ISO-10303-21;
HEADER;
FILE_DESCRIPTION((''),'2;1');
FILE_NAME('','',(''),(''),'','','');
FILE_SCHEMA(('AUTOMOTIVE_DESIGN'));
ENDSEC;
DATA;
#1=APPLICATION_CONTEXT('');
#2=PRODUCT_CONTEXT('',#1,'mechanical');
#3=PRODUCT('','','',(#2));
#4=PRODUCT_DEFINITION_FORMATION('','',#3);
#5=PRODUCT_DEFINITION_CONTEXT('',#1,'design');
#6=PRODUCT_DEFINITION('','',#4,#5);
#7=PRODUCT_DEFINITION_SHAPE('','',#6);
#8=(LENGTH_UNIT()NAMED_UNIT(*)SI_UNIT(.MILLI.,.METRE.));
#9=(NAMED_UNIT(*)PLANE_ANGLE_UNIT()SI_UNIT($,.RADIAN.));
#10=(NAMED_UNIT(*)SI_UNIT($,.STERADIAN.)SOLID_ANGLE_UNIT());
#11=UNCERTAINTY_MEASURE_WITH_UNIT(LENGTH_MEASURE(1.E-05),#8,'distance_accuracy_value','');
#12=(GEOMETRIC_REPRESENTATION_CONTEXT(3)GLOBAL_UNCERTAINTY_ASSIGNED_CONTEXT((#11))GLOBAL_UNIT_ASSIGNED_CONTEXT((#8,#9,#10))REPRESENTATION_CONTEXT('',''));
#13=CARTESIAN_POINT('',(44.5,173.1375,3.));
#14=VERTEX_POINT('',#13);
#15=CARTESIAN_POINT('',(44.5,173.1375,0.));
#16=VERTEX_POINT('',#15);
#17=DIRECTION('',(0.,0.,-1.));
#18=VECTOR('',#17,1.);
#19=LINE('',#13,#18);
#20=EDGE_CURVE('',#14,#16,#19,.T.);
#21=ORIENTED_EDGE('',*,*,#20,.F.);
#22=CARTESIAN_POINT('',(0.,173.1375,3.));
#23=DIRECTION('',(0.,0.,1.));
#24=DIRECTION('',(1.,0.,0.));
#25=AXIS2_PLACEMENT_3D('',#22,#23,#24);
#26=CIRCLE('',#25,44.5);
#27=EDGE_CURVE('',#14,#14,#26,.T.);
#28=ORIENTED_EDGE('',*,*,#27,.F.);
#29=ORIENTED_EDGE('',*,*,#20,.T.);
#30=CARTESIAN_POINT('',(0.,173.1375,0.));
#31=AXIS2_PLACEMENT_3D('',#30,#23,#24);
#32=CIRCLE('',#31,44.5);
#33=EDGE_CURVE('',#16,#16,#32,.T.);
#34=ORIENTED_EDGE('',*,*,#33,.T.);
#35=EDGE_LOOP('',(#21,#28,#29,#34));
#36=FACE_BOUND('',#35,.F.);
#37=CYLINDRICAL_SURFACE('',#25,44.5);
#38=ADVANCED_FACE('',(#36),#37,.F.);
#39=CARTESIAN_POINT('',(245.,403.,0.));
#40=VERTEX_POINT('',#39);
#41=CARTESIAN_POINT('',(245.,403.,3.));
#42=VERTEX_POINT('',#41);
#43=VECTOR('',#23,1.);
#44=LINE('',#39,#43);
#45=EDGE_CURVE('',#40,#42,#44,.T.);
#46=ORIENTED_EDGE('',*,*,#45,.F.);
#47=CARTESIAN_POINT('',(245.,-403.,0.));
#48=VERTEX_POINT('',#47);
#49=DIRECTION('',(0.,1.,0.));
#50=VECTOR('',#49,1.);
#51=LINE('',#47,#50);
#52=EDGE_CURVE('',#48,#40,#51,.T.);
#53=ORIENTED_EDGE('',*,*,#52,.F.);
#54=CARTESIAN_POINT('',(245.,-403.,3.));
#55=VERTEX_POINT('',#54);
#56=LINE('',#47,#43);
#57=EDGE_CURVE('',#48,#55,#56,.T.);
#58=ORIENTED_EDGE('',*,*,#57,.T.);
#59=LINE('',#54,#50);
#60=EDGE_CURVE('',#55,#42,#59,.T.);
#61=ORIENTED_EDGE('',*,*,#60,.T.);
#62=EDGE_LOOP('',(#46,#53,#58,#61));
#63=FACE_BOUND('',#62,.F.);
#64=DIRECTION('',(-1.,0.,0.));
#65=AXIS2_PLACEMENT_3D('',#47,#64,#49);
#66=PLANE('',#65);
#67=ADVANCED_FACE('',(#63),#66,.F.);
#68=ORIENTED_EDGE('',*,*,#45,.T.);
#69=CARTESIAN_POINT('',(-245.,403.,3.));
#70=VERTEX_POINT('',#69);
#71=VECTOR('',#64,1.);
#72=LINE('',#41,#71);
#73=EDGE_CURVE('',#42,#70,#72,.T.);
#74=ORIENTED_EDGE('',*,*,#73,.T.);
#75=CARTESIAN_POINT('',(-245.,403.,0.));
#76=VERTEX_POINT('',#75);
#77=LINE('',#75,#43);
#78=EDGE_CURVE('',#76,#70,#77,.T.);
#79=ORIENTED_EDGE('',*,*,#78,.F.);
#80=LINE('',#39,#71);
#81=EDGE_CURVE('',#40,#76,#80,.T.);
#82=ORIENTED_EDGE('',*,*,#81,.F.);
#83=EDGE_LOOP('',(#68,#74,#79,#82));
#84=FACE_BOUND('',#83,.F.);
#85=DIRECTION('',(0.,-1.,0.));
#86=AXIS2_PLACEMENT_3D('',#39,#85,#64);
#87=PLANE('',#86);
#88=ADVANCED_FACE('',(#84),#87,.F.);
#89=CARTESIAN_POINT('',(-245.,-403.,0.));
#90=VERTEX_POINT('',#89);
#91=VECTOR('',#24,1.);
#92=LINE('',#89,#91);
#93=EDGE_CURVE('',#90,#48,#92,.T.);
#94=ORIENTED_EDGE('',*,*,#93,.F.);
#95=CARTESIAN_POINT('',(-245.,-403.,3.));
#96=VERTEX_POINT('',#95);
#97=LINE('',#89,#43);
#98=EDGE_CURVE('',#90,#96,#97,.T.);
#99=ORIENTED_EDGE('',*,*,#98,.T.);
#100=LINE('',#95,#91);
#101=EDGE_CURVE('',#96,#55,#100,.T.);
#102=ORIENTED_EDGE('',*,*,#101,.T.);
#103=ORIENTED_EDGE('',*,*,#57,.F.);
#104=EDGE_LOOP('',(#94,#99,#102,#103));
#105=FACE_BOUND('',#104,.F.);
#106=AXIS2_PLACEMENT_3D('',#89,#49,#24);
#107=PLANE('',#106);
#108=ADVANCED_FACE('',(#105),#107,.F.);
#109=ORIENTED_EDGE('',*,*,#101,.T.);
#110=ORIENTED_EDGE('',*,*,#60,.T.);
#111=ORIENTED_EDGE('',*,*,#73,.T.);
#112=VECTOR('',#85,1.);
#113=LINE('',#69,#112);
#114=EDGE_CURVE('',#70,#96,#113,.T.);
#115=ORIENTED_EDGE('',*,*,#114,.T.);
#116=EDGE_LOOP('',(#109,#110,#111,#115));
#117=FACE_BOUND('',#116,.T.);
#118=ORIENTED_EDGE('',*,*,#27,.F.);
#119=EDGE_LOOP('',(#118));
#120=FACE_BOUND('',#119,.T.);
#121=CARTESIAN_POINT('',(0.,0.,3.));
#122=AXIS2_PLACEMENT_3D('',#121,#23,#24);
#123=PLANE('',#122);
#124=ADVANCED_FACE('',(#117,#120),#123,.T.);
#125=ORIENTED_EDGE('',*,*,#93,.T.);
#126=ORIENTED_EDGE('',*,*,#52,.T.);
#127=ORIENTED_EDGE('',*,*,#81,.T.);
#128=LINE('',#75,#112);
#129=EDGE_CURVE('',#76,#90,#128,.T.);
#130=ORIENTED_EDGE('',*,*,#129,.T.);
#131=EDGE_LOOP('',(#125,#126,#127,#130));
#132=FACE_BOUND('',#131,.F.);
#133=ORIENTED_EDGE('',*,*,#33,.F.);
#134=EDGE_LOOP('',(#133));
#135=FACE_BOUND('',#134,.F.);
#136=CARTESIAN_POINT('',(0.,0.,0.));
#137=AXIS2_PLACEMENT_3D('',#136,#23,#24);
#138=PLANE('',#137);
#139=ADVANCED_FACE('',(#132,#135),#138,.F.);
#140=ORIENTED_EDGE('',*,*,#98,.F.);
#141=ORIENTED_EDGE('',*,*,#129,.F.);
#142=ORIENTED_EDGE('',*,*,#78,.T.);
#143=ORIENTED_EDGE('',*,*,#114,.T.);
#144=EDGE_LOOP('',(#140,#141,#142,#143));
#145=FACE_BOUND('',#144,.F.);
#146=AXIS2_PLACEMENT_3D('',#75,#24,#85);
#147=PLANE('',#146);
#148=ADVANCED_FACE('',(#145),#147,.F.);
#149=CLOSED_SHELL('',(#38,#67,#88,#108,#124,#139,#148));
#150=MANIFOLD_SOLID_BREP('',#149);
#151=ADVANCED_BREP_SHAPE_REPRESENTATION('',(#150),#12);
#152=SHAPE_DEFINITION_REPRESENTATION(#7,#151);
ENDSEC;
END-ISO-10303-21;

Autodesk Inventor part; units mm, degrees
ref_plane "YZ Plane" through (0, 0, 0) normal (1, 0, 0) x (0, 1, 0)
ref_plane "XZ Plane" through (0, 0, 0) normal (0, 1, 0) x (-1, 0, 0)
ref_plane "XY Plane" through (0, 0, 0) normal (0, 0, 1) x (1, 0, 0)
sketch "Sketch1" plane through (0, 0, 0) normal (0, 0, 1) x (1, 0, 0)
  line L0 (-245, -403) -> (245, -403)
  line L1 (245, -403) -> (245, 403)
  line L2 (245, 403) -> (-245, 403)
  line L3 (-245, 403) -> (-245, -403)
  line L4 (-245, -403) -> (245, 403) construction
  line L5 (245, -403) -> (-245, 403) construction
  point P0 (0, 0)
  dimension "d0" = 490
  dimension "d1" = 806
extrude "Plate1" add sketch "Sketch1" along normal blind 3
sketch "Sketch2" plane through (0, 0, 0) normal (0, 0, -1) x (-1, 0, 0)
  line L0 (-245, 403) -> (245, 403) projected
  line L1 (-245, -403) -> (-245, 403) projected
  line L2 (-225, 383) -> (-25, 383) construction
  line L3 (-25, 383) -> (-25, 363) construction
  line L4 (-25, 363) -> (-225, 363) construction
  line L5 (-225, 363) -> (-225, 383) construction
  point P0 (0, 0)
  dimension "d8" = 200
  dimension "d9" = 20
  dimension "d10" = 20
  dimension "d11" = 20
mark "Mark3"
sketch "Sketch6" plane through (0, 0, 3) normal (0, 0, 1) x (1, 0, 0)
  circle A0 centre (0, 173.1375) radius 44.5
  point P0 (0, 0)
  dimension "d42" = 89
extrude "Cut1" cut sketch "Sketch6" against normal blind 3
equation "\"d43\" = Thickness"
equation "\"d2\" = Thickness"
equation "\"BendReliefWidth\" = Thickness"
equation "\"BendReliefDepth\" = 0.5 * Thickness"
equation "\"CornerReliefSize\" = 4 * Thickness"
equation "\"MinimumRemnant\" = 2 * Thickness"
equation "\"TransitionRadius\" = BendRadius"
equation "\"JacobiRadiusSize\" = BendRadius"
equation "\"GapSize\" = Thickness"
equation "\"Thickness\" = 3"
equation "\"BendRadius\" = 2.75"
properties part number "TRM 011 bottom main" material "AISI 304"
